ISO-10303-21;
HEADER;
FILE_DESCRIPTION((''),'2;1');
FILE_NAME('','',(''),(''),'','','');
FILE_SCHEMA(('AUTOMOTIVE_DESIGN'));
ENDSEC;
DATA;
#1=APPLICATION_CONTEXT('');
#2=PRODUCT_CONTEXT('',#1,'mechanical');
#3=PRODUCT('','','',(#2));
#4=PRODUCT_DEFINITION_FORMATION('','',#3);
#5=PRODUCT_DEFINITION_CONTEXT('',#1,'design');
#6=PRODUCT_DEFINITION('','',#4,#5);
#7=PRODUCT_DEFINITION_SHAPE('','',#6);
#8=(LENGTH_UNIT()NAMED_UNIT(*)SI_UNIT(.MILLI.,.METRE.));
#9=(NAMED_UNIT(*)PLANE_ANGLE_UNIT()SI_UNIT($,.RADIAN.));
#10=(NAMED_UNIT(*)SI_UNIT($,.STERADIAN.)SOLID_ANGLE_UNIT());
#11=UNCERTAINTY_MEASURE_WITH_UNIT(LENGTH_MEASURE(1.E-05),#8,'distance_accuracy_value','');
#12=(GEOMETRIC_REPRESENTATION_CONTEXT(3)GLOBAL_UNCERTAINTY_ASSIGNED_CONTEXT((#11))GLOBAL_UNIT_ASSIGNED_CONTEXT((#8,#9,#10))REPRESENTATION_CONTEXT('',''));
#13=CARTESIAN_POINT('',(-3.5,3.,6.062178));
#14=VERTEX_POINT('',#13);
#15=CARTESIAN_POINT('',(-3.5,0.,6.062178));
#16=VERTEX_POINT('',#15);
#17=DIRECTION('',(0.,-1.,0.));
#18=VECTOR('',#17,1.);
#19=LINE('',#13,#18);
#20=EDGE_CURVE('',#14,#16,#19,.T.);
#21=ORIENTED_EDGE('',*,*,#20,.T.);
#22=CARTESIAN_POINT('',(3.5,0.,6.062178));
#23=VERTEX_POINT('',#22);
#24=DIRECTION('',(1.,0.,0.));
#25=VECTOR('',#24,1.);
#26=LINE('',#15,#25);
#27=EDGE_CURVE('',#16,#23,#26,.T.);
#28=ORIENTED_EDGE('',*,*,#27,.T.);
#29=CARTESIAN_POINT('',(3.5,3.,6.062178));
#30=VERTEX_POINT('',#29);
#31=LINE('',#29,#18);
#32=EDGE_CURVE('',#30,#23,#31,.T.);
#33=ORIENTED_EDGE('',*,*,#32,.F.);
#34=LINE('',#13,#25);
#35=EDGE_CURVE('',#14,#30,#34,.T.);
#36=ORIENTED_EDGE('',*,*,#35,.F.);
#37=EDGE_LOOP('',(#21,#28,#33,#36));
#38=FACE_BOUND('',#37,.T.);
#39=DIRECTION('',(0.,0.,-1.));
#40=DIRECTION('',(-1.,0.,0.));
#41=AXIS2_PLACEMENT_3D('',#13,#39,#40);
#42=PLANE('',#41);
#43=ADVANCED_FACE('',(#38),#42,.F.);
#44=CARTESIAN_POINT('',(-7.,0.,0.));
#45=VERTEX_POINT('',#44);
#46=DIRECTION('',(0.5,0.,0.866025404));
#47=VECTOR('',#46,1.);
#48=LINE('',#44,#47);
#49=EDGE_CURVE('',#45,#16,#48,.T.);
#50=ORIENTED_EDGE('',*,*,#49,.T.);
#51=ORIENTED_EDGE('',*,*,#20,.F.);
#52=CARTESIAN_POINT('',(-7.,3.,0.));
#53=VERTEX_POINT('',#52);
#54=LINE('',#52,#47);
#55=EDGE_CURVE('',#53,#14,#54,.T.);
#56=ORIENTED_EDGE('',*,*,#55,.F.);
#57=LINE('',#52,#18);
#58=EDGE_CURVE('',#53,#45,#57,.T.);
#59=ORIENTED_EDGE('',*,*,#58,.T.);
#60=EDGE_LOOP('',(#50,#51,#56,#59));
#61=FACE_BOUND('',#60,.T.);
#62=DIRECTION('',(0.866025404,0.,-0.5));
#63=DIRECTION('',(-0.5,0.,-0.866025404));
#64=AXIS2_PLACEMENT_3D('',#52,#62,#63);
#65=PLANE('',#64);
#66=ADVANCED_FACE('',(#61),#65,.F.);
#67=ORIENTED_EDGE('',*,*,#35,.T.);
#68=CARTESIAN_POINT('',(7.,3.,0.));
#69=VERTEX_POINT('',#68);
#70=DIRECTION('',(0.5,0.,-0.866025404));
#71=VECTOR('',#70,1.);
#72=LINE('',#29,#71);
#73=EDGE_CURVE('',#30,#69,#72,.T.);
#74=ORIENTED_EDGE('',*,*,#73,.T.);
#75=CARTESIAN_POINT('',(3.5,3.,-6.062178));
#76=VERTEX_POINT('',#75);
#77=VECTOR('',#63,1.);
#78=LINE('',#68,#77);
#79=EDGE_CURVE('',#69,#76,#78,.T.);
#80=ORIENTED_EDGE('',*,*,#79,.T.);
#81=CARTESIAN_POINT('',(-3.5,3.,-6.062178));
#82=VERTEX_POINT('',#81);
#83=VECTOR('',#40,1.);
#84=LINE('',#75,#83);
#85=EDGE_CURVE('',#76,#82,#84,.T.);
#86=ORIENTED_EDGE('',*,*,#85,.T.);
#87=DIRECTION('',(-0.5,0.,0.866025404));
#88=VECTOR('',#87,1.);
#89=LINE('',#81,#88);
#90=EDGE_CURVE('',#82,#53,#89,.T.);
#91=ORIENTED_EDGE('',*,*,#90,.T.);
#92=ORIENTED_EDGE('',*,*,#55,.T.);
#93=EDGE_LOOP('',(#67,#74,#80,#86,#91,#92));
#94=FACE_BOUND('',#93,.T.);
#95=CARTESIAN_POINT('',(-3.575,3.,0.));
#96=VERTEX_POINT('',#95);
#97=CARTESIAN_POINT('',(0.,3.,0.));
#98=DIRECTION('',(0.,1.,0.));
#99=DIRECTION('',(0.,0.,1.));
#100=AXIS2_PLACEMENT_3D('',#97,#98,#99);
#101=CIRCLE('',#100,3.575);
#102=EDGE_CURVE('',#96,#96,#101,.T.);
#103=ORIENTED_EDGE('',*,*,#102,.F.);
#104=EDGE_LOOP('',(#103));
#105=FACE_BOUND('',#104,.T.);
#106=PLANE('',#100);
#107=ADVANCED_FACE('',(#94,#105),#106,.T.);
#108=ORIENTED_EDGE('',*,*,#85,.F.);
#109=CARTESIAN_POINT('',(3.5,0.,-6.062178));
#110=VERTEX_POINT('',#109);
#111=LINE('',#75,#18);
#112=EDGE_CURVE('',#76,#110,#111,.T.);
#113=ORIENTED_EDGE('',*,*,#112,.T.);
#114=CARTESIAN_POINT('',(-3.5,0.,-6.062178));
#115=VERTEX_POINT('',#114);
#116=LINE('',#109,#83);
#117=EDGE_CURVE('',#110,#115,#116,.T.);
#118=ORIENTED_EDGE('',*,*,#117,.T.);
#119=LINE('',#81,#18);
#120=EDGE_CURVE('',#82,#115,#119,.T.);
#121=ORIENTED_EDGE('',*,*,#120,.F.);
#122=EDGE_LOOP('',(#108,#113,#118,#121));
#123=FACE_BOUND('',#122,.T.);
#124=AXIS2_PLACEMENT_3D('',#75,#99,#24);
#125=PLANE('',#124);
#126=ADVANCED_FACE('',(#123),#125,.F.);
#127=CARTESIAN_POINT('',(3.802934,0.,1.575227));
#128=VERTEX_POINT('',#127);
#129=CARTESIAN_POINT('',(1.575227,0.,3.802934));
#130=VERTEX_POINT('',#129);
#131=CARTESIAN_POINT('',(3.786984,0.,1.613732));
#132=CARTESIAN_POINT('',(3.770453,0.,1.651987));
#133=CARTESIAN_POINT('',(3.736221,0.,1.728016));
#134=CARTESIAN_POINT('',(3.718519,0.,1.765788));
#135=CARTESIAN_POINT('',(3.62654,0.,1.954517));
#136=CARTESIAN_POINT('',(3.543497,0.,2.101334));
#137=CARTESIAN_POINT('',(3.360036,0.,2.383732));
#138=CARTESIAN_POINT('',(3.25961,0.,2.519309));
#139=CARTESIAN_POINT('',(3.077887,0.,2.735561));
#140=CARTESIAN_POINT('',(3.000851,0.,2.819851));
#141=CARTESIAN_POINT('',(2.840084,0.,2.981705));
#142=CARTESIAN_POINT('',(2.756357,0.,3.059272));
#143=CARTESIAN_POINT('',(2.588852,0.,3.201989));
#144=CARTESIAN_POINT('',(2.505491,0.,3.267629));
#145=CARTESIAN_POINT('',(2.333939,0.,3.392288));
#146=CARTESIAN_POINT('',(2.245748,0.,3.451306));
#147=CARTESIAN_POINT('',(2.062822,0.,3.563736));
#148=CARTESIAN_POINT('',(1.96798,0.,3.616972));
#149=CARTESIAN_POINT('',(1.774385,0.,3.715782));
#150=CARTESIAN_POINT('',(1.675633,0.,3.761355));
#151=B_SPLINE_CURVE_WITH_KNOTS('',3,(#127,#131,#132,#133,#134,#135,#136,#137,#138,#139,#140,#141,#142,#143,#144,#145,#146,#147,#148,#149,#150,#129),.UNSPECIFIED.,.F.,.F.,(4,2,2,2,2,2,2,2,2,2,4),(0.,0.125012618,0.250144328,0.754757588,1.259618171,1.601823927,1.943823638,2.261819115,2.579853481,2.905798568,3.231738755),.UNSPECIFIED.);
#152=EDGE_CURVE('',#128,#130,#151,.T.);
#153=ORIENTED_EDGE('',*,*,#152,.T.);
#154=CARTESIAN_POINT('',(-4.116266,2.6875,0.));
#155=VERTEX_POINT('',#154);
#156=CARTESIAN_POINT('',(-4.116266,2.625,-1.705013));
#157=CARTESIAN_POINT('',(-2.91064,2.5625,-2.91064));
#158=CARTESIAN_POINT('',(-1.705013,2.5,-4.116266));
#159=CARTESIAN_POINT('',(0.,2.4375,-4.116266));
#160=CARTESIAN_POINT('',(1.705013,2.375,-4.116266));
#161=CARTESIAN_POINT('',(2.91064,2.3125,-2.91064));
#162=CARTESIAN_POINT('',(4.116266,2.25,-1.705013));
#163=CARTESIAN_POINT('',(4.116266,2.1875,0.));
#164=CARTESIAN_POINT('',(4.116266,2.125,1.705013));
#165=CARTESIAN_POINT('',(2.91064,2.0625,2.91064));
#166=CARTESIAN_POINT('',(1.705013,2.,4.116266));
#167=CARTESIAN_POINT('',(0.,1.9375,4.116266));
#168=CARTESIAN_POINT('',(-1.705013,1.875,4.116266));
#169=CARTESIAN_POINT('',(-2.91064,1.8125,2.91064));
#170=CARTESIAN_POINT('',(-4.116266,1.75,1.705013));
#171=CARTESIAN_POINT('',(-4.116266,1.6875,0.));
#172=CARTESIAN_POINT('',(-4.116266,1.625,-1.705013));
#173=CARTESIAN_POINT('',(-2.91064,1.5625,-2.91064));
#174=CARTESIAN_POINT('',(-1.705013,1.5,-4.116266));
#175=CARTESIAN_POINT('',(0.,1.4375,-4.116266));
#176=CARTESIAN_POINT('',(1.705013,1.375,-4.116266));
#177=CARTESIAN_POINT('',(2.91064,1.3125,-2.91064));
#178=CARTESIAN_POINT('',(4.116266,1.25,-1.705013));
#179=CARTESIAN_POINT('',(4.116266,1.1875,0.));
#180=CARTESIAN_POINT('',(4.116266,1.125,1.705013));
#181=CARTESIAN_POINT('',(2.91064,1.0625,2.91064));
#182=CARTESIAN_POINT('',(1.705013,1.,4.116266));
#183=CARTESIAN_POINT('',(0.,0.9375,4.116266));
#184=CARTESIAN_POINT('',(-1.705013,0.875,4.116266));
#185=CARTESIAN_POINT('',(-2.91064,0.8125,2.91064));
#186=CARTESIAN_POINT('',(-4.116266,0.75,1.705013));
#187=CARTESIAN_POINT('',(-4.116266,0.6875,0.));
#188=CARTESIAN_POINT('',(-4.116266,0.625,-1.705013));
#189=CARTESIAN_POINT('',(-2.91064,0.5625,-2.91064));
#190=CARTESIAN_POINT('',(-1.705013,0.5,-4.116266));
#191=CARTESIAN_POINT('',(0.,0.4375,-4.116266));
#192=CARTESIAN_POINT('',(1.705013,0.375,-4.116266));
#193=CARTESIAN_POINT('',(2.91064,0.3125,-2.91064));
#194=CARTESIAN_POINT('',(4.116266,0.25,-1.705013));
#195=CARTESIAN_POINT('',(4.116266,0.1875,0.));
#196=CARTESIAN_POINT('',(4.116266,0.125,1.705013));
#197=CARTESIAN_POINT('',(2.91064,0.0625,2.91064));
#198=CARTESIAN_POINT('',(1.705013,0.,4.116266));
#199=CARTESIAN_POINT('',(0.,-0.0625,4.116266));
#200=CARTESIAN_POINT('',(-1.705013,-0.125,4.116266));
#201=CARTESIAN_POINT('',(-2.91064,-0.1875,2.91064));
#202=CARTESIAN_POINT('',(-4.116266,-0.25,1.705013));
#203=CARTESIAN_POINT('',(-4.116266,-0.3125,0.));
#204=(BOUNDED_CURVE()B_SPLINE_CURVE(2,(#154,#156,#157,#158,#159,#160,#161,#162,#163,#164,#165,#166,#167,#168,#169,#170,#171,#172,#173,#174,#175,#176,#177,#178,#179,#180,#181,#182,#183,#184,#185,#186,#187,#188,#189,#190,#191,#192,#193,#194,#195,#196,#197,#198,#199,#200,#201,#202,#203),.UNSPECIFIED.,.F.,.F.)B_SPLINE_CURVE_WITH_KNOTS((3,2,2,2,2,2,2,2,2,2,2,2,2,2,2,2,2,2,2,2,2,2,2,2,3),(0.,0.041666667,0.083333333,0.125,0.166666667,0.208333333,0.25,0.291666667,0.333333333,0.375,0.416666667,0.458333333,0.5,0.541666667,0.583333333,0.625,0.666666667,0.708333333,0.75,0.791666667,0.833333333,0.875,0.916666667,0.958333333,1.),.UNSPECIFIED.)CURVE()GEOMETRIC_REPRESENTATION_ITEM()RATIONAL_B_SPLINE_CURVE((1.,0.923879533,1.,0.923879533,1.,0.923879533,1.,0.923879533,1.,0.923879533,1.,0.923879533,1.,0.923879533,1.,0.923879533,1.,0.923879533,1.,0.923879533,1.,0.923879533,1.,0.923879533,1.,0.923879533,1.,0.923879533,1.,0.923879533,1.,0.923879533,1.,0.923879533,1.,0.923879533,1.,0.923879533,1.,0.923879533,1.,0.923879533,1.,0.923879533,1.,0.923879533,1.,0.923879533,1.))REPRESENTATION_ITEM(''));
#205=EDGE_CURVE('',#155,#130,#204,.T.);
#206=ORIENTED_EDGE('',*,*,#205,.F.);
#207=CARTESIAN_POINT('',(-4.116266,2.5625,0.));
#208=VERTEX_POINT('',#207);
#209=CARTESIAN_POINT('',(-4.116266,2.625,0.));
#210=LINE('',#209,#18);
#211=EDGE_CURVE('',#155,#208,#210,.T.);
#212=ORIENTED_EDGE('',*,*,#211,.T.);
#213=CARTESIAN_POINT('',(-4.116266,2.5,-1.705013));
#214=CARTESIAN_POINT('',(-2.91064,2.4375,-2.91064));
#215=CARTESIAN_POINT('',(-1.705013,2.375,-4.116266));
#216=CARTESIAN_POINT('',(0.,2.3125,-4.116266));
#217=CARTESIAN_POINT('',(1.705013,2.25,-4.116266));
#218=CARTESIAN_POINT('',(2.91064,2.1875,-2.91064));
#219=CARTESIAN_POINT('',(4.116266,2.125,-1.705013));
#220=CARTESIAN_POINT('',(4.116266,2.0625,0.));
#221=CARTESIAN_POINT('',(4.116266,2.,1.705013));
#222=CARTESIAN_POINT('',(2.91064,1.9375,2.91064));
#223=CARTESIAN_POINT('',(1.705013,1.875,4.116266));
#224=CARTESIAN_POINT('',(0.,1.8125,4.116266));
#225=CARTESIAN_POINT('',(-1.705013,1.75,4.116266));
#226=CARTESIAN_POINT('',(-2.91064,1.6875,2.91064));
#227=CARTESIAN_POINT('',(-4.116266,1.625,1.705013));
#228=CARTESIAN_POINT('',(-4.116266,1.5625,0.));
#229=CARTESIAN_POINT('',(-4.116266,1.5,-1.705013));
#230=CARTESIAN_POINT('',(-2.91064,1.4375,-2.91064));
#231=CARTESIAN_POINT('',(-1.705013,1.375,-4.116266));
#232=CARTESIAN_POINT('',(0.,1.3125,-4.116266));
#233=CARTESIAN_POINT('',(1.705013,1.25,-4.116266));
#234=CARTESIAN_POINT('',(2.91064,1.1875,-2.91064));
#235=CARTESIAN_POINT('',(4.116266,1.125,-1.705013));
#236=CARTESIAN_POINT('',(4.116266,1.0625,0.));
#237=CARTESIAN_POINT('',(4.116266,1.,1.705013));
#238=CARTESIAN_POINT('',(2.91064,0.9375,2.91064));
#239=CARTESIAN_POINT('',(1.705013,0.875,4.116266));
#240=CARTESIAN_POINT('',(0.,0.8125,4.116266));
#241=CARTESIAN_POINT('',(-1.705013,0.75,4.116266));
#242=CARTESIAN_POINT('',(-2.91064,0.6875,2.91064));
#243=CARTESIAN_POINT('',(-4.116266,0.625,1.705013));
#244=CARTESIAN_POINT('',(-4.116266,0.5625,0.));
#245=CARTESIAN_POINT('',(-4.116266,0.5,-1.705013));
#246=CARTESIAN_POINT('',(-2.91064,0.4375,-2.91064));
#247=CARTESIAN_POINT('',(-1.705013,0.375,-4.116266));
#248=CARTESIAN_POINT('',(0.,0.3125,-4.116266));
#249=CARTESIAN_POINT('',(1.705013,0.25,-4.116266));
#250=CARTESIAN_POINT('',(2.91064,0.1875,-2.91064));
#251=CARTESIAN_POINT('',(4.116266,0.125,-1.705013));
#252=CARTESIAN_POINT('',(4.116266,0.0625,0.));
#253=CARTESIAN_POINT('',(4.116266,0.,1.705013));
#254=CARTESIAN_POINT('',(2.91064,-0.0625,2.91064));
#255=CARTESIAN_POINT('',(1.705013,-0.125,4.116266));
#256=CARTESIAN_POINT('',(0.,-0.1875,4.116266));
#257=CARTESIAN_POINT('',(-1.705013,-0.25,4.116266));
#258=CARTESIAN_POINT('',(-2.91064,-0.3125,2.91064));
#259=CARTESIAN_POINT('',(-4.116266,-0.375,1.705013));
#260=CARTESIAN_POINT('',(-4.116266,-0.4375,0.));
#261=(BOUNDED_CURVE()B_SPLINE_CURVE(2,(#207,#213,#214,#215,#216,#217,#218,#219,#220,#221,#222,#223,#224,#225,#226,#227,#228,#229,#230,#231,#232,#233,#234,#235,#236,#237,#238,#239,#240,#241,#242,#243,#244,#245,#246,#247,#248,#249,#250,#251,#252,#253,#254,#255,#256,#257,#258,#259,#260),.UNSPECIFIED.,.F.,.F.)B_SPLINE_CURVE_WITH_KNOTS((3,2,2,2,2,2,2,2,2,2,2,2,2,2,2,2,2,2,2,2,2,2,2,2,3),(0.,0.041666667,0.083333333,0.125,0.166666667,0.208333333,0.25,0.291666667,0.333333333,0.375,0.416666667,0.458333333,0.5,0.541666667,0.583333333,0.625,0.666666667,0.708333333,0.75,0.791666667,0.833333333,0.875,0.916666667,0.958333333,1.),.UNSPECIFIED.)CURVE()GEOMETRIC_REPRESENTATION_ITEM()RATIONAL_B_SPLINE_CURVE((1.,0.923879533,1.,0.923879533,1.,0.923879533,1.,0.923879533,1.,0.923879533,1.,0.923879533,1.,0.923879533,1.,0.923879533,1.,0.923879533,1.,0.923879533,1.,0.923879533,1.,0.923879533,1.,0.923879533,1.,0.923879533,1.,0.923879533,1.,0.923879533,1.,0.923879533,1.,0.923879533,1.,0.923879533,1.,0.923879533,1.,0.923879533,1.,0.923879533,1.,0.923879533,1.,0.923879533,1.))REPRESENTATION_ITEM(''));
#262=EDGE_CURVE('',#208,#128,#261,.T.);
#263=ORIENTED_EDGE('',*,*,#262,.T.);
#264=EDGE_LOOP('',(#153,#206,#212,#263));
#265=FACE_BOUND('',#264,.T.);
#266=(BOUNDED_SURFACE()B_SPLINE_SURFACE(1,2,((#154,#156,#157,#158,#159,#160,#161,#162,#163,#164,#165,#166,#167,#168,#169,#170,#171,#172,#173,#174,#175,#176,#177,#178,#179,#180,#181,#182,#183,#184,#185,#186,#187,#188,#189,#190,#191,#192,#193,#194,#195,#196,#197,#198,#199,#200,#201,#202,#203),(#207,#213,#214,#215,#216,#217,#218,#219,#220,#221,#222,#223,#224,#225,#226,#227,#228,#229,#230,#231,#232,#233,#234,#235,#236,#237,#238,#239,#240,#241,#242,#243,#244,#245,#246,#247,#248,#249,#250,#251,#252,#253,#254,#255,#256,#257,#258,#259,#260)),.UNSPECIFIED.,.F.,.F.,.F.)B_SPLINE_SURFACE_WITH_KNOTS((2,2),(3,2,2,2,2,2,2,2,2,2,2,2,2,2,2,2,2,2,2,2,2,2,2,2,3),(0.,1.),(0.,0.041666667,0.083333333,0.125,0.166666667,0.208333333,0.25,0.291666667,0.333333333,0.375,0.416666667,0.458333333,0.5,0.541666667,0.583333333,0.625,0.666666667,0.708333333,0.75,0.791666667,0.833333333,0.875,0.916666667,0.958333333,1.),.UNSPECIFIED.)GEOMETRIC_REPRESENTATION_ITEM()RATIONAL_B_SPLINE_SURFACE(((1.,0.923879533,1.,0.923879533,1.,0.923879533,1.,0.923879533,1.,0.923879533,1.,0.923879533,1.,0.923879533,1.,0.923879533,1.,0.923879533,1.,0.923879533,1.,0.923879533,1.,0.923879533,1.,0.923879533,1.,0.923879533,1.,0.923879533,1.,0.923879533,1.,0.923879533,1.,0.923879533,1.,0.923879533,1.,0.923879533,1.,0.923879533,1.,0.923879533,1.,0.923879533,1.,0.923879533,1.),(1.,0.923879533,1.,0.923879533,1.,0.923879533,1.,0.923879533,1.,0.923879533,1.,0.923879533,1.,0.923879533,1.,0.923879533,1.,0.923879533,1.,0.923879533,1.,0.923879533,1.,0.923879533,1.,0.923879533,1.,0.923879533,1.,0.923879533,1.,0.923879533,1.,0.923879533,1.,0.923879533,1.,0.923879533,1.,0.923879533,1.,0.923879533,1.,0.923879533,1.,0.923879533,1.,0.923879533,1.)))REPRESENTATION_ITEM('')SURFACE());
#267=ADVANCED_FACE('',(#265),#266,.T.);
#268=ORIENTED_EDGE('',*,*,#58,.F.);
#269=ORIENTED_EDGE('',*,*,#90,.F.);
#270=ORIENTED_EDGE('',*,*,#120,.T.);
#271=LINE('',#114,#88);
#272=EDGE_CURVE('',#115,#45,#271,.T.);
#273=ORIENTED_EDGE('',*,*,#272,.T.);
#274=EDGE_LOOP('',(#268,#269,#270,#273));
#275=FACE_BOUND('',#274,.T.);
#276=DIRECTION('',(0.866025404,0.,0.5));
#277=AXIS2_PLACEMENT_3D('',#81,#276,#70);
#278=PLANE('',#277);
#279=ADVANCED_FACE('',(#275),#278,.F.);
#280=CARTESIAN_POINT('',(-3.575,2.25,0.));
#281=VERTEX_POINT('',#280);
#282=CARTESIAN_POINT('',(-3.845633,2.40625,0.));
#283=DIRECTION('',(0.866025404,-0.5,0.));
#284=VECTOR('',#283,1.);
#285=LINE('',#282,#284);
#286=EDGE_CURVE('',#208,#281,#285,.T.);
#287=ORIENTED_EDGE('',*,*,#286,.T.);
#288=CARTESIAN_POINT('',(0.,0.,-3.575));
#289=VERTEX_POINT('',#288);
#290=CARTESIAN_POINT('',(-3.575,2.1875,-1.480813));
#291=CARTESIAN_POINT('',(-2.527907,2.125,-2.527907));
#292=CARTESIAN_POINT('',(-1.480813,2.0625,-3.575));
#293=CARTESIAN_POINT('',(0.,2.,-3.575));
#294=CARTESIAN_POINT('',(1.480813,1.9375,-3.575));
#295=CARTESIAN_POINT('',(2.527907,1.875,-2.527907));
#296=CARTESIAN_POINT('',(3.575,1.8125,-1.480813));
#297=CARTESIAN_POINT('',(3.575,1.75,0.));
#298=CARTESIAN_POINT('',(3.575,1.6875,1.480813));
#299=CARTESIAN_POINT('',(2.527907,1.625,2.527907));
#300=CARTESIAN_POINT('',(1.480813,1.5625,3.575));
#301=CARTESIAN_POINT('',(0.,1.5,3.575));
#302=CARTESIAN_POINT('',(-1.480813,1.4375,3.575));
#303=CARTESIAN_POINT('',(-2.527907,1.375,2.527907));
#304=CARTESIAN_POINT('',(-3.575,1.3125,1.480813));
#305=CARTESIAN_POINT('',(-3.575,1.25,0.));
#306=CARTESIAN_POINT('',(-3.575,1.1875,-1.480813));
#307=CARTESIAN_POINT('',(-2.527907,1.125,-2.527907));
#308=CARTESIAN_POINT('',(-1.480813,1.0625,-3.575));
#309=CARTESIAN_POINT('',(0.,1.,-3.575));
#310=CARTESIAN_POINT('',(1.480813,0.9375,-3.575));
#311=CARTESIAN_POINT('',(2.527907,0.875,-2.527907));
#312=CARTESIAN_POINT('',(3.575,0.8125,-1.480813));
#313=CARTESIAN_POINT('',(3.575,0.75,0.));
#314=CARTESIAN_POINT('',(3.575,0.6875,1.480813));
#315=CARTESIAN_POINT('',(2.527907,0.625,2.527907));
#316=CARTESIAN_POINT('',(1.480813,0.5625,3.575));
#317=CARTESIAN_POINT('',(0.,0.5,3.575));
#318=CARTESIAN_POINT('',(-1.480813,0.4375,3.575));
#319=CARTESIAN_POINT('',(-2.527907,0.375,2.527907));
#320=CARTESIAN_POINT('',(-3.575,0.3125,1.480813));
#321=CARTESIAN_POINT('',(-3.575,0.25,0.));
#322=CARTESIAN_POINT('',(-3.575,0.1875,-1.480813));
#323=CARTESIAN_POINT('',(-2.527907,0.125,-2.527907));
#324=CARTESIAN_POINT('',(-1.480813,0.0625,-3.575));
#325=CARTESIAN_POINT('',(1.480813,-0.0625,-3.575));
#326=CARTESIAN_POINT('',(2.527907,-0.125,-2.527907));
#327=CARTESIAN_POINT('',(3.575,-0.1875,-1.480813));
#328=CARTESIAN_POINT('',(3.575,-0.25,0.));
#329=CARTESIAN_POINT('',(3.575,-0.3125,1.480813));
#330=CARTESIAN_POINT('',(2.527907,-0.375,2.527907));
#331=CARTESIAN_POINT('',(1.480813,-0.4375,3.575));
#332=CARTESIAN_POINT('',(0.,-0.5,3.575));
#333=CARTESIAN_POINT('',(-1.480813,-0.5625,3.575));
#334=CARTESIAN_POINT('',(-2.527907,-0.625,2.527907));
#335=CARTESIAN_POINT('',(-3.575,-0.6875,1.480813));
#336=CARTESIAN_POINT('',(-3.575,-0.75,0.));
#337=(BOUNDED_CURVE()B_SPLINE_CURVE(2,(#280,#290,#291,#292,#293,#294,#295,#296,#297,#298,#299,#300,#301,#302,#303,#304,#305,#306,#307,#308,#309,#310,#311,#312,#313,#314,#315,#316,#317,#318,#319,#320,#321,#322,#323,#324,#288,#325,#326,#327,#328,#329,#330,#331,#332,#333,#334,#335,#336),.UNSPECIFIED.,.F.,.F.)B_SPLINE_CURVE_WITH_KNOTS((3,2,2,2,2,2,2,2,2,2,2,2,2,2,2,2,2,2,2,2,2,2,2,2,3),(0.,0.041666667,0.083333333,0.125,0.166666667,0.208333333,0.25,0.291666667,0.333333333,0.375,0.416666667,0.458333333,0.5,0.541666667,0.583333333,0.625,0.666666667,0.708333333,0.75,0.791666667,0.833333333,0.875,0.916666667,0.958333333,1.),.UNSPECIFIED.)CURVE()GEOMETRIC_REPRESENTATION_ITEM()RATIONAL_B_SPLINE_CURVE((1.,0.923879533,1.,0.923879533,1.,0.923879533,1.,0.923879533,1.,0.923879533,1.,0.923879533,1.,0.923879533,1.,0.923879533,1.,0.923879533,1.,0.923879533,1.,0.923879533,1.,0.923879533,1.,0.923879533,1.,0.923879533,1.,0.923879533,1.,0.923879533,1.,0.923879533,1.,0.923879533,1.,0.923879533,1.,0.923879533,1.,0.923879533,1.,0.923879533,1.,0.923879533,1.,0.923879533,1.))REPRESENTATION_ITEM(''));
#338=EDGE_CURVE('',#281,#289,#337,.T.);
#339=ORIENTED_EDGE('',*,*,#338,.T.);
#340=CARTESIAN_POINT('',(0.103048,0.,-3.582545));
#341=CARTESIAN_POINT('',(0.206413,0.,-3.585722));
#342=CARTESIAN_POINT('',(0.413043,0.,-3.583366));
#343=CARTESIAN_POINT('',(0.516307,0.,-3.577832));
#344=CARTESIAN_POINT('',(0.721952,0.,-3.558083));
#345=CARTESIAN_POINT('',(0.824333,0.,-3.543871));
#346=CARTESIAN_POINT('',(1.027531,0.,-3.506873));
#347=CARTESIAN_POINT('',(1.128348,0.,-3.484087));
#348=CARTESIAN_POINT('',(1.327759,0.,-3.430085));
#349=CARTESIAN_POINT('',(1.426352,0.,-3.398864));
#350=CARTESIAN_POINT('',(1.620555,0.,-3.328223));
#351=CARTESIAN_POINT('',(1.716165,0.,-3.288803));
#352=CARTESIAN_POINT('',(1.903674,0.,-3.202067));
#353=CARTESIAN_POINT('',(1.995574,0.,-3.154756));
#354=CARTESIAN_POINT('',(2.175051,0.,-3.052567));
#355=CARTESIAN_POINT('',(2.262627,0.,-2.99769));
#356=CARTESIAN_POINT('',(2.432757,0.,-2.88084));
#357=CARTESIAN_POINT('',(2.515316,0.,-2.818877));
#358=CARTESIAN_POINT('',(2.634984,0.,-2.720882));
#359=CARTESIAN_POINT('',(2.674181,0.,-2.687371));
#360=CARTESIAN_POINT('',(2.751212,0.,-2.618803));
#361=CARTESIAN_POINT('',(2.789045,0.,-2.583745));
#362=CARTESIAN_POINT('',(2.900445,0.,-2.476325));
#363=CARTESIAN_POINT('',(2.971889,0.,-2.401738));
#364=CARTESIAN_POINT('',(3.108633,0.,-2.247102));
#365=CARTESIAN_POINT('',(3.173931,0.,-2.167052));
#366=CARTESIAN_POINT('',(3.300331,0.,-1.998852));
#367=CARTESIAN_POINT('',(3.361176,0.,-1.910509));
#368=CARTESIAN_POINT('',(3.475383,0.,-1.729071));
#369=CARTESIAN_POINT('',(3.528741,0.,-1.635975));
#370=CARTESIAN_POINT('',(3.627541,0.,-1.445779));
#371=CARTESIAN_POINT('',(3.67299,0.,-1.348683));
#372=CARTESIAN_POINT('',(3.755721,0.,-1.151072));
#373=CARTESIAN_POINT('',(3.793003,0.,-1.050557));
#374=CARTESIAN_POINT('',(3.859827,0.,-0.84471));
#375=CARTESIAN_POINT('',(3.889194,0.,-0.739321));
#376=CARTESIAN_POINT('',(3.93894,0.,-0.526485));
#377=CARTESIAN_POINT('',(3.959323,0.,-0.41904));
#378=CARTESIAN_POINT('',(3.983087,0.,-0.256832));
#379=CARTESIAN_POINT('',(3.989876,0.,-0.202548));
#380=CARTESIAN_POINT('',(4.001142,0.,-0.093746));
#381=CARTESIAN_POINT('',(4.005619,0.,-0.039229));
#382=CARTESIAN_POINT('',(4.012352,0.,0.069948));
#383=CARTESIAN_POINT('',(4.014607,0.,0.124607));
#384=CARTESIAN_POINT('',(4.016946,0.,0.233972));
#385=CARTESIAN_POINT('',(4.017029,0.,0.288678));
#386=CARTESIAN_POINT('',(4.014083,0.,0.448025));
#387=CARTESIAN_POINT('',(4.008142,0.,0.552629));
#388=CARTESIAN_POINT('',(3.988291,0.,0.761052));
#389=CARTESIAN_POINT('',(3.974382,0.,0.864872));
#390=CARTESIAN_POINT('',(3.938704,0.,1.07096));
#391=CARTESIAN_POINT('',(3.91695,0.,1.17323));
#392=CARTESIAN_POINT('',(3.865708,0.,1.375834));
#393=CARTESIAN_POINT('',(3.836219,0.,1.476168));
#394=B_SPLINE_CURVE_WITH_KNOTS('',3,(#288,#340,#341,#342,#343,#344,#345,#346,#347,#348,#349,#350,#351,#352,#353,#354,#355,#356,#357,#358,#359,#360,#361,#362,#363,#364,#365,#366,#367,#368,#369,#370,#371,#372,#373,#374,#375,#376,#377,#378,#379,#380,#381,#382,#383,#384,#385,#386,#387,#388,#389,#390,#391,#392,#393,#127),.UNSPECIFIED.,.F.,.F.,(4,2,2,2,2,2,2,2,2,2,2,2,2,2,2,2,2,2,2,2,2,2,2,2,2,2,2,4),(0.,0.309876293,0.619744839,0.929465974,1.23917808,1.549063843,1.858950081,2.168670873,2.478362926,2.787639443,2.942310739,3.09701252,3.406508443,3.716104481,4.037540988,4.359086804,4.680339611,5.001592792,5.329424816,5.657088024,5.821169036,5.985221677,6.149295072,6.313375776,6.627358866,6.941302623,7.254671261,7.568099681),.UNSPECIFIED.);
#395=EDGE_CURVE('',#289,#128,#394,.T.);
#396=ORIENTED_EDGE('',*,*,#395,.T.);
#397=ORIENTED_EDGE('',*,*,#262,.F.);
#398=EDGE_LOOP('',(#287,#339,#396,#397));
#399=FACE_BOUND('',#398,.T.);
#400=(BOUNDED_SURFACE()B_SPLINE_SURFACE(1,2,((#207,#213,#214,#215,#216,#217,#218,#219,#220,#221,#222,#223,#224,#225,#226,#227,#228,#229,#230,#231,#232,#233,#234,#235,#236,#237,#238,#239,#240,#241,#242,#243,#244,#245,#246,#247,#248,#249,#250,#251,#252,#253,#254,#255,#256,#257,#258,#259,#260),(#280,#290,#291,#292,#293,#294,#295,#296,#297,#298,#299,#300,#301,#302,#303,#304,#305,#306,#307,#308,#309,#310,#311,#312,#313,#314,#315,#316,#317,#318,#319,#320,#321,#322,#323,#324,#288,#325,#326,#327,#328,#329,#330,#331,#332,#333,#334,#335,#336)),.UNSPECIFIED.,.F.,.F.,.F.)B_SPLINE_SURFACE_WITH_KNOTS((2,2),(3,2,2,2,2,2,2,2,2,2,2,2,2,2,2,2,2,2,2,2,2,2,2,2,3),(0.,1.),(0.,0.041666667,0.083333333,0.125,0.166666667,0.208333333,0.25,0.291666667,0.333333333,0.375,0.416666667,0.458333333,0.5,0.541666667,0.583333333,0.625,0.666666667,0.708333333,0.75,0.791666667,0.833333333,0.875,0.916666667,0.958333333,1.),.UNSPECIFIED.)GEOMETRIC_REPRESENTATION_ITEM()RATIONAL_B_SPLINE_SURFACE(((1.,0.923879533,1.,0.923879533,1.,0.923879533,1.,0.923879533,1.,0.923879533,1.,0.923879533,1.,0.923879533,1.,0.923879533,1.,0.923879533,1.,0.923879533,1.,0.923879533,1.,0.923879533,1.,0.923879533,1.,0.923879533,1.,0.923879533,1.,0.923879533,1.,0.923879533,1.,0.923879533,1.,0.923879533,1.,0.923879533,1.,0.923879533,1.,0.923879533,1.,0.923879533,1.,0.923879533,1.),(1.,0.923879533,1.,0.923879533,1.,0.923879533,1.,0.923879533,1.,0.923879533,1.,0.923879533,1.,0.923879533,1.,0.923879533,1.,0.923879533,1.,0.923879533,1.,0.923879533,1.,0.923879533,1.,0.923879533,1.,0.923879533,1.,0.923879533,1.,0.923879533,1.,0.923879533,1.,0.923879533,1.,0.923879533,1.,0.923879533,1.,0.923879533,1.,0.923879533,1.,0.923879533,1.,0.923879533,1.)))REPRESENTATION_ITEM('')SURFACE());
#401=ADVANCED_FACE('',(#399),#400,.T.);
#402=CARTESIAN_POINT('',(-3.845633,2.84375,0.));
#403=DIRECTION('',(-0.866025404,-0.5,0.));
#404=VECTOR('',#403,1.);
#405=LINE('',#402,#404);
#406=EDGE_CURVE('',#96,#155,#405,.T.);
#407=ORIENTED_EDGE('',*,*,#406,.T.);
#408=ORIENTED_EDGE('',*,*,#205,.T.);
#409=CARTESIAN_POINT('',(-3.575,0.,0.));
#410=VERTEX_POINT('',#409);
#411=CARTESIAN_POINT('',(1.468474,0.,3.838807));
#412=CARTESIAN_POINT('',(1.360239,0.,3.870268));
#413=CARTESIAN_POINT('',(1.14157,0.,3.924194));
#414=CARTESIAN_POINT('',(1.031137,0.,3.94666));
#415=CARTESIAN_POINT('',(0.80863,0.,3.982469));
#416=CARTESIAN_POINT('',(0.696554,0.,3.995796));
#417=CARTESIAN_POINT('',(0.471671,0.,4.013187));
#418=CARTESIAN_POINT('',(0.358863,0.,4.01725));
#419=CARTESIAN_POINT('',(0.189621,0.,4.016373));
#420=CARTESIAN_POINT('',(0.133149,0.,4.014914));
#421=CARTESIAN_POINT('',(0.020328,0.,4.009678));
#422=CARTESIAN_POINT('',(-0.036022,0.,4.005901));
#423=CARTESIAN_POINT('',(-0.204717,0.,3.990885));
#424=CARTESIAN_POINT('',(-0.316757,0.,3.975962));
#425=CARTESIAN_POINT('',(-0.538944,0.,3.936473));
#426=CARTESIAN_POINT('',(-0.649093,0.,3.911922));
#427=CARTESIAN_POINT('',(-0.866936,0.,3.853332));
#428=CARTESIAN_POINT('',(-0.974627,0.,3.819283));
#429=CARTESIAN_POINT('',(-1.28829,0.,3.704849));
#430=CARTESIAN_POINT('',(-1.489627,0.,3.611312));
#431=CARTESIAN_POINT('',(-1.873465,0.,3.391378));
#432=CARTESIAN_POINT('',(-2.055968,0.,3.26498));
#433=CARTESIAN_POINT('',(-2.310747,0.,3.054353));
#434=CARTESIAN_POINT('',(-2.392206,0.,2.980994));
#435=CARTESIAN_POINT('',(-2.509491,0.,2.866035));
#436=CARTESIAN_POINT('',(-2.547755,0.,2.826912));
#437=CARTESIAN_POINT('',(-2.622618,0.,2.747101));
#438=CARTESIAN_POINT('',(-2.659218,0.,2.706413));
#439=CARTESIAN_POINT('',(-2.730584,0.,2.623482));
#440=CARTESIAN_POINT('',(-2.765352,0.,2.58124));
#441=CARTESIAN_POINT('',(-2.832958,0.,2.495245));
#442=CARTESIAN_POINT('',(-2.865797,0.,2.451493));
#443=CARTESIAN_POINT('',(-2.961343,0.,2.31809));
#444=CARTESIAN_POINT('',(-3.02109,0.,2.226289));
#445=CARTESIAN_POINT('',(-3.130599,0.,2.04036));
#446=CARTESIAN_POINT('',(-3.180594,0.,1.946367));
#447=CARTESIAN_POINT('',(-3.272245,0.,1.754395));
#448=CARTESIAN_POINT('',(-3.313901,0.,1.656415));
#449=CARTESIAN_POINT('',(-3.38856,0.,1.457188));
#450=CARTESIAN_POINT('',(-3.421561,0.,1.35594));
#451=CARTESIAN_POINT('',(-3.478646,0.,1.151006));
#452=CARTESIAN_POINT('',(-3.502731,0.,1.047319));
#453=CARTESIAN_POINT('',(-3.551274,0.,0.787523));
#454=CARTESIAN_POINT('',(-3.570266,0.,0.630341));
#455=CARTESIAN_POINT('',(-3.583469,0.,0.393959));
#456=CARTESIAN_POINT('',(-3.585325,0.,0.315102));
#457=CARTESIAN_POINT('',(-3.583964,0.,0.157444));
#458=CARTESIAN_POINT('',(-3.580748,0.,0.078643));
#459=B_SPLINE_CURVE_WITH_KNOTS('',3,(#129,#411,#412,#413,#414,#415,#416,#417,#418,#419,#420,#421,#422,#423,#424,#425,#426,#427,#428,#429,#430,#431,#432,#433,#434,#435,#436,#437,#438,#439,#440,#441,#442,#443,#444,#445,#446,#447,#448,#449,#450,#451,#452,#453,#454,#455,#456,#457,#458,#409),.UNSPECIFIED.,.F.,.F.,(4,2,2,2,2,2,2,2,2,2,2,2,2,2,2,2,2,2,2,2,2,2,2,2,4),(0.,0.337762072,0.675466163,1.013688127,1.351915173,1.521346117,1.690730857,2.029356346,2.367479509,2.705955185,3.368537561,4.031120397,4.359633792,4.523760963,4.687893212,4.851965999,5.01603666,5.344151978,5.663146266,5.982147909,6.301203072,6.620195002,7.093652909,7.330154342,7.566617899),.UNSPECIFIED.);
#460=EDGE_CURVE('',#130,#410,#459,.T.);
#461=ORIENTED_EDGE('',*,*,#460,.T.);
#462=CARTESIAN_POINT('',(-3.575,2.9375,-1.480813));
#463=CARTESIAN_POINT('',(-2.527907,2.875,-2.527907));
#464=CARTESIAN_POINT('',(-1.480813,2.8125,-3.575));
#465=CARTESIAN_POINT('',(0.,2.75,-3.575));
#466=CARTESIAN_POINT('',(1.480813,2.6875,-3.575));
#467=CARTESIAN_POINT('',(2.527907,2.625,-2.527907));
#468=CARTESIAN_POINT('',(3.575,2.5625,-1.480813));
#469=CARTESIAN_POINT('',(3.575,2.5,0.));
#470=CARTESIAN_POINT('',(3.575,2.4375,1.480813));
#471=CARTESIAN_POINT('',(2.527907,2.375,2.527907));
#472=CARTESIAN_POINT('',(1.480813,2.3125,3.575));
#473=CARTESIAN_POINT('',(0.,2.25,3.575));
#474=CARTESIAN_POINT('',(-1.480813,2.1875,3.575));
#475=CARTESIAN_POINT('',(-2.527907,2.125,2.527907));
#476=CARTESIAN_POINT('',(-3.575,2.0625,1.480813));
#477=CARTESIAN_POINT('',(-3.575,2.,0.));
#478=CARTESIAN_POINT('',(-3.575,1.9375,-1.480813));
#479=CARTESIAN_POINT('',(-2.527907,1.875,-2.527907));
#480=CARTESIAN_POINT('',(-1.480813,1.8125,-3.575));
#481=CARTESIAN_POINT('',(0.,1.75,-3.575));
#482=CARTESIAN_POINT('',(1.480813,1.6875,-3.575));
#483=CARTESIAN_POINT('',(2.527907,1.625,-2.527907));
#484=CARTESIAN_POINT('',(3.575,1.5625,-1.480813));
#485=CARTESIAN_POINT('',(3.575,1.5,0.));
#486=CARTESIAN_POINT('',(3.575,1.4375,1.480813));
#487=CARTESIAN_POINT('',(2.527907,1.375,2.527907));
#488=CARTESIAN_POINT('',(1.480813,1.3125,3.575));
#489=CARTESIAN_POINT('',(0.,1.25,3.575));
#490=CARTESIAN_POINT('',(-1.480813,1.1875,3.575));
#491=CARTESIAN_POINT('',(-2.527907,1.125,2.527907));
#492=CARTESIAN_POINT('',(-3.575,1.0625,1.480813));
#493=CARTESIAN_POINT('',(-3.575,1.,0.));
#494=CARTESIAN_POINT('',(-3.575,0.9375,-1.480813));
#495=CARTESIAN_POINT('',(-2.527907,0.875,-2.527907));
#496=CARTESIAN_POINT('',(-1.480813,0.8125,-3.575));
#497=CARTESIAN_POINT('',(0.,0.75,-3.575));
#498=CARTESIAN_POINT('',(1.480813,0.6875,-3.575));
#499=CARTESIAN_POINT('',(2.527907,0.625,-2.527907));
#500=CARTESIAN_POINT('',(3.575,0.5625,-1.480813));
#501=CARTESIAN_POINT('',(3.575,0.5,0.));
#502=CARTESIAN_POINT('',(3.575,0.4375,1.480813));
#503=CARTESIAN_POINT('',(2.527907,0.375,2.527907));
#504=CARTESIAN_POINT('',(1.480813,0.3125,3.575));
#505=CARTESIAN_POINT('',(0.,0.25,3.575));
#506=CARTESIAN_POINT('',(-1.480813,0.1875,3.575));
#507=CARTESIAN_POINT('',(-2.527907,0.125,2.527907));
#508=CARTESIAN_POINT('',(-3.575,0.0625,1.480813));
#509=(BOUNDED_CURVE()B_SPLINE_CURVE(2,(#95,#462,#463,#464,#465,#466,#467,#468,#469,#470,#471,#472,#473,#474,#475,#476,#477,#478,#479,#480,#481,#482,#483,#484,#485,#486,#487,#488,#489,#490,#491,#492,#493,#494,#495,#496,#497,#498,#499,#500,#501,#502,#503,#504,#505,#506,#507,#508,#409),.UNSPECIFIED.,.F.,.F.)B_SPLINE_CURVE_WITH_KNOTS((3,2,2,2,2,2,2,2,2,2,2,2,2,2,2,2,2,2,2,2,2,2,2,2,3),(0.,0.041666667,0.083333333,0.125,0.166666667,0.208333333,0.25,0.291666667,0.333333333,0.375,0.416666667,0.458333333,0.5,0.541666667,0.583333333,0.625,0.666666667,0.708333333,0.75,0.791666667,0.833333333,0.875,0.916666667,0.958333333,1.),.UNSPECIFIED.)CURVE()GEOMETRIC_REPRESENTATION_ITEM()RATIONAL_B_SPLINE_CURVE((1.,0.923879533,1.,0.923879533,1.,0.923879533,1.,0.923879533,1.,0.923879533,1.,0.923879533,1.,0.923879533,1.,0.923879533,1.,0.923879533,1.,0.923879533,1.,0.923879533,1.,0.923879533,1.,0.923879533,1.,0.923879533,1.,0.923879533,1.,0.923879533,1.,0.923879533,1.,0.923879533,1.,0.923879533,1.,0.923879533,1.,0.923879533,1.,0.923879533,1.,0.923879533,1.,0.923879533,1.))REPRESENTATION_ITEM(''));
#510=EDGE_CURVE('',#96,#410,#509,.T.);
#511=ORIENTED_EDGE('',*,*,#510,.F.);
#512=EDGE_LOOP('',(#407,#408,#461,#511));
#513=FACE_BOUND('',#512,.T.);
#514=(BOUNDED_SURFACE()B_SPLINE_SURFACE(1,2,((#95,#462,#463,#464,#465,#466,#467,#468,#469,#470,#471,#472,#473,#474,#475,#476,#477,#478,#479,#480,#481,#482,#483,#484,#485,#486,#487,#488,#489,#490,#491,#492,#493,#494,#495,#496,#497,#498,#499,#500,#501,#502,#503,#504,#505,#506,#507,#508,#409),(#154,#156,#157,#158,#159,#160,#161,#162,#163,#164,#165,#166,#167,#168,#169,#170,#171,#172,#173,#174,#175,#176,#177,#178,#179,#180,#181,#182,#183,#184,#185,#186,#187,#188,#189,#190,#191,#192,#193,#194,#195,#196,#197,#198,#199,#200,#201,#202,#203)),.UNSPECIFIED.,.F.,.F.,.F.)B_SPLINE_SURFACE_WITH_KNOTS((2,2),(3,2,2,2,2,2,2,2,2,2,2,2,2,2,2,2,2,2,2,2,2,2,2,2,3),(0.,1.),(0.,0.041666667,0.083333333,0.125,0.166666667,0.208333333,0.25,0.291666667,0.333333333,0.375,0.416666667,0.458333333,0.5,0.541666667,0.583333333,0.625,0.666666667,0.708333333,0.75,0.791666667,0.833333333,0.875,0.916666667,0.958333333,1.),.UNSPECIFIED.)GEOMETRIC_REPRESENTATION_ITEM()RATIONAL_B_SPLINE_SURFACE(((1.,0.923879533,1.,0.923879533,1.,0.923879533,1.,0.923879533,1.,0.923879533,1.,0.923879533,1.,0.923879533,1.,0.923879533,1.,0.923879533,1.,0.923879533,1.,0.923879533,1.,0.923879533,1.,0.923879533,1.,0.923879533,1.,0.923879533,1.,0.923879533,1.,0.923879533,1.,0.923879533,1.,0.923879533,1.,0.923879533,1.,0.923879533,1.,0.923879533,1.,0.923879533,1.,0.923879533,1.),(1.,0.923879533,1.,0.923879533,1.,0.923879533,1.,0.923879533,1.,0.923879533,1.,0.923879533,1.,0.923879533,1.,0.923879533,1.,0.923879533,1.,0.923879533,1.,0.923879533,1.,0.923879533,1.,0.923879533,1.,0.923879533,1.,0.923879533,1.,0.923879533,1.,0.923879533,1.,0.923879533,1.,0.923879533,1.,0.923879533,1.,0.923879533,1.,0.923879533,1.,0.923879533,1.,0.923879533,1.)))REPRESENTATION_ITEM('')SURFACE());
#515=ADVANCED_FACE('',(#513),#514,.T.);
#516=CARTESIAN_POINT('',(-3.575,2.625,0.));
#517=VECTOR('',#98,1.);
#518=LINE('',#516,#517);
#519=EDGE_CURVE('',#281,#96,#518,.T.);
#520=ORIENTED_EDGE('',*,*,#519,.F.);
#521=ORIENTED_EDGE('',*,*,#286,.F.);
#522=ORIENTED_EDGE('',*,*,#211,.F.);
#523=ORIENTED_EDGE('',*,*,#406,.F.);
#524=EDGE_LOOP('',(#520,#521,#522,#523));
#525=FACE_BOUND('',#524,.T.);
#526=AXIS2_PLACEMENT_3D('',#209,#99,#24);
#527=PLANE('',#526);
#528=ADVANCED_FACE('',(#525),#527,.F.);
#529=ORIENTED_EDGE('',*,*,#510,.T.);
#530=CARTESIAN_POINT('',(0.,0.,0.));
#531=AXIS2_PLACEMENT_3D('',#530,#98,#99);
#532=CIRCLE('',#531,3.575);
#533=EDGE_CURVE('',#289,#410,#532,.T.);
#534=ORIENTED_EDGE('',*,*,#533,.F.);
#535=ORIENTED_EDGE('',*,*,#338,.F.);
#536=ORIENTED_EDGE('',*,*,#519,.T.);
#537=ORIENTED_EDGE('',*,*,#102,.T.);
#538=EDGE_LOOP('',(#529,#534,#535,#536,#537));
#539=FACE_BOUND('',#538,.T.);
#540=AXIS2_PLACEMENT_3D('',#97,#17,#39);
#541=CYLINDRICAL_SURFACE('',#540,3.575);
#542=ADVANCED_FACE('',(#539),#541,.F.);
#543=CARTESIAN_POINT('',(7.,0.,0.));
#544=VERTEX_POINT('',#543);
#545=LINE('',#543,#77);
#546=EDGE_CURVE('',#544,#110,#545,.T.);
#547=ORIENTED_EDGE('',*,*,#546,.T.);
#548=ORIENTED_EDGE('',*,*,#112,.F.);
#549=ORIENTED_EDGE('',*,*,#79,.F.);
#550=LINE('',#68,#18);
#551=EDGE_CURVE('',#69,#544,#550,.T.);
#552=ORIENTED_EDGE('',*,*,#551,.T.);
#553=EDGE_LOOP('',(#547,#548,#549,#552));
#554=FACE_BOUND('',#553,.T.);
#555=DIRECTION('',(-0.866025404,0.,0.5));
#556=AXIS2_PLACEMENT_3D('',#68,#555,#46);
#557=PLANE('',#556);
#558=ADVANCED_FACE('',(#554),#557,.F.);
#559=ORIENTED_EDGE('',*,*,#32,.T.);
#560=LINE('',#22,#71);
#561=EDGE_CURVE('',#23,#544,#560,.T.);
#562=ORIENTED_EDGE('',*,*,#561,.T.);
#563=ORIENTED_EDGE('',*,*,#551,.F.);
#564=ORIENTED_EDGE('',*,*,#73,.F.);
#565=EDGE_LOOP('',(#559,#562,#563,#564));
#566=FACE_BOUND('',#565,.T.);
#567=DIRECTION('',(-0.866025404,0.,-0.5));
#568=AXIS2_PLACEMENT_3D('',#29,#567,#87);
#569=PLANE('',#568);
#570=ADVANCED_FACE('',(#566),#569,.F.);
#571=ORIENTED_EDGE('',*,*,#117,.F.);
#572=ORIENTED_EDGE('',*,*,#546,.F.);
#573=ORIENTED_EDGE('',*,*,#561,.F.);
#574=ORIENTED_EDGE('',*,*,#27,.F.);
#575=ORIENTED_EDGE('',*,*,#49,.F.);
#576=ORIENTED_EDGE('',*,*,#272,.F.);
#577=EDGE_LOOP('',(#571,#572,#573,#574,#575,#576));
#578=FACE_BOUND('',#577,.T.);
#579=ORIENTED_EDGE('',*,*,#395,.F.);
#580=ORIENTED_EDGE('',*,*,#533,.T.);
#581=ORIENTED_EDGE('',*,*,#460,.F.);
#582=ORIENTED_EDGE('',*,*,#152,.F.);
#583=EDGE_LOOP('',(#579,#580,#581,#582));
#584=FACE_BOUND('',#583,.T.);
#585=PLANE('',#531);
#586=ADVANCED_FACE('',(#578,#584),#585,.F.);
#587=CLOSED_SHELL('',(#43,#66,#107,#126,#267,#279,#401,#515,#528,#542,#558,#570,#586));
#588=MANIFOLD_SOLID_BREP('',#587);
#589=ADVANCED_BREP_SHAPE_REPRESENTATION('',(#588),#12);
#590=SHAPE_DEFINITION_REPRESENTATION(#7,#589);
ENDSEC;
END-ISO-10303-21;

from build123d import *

# Parameters (mm, degrees)
SKETCH1_R           = 3.575
BOSS_EXTRUDE1_DEPTH = 3
THREAD1_PITCH       = 1


with BuildPart() as part:
    # Sketch1 → Boss-Extrude1 (new body)
    with BuildSketch(Plane(origin=(0, 0, 0), x_dir=(1, 0, 0), z_dir=(0, 1, 0))):
        Polygon((7, 0), (3.5, 6.062177826), (-3.5, 6.062177826), (-7, 0), (-3.5, -6.062177826), (3.5, -6.062177826), align=None)
        with Locations(Location((0, 0, 0), (0, 0, 270))):
            Circle(SKETCH1_R, mode=Mode.SUBTRACT)
    extrude(amount=BOSS_EXTRUDE1_DEPTH)

    # Thread1: the profile of Thread Profile1 profile screwed along a right-hand helix of 3 turns, 8 arcs to a turn; built about Z, then put on its axis
    thread1_z = Axis((0, 0, 0), (0, 0, 1))
    thread1_corners = [(3.5747, 0, -0.000173205), (4.116265875, 0, 0.312499999), (4.116265875, 0, 0.437499999), (3.5747, 0, 0.750173202)]
    with BuildLine(mode=Mode.PRIVATE) as thread1_profile:
        Line(thread1_corners[0], thread1_corners[1])
        Line(thread1_corners[1], thread1_corners[2])
        Line(thread1_corners[2], thread1_corners[3])
        Line(thread1_corners[3], thread1_corners[0])
    thread1_cap = Face(thread1_profile.wire())
    thread1_turn_angles = [0, 22.5, 45, 67.5, 90, 112.5, 135, 157.5, 180, 202.5, 225, 247.5, 270, 292.5, 315, 337.5, 360]
    thread1_turn_weights = [1, 0.9238795325112867, 1, 0.9238795325112867, 1, 0.9238795325112867, 1, 0.9238795325112867, 1, 0.9238795325112867, 1, 0.9238795325112867, 1, 0.9238795325112867, 1, 0.9238795325112867, 1]
    thread1_turn_rails = [Edge.make_bspline([Vector(p[0], p[1], 0).rotate(thread1_z, thread1_turn_angles[k]) / thread1_turn_weights[k] + Vector(0, 0, p[2] + THREAD1_PITCH * thread1_turn_angles[k] / 360) for k in range(17)], [0, 0, 0, 1, 1, 2, 2, 3, 3, 4, 4, 5, 5, 6, 6, 7, 7, 8, 8, 8], 2, thread1_turn_weights) for p in thread1_corners]
    thread1_turn_sides = [Face.make_surface_from_curves(thread1_turn_rails[p[0]], thread1_turn_rails[p[1]]) for p in [(0, 1), (1, 2), (2, 3), (3, 0)]]
    thread1 = Plane(origin=(0, 3, 0), x_dir=(-1, 0, 0), z_dir=(0, -1, 0)) * Solid(Shell([*[p.moved(Location((0, 0, THREAD1_PITCH * i))) for i in range(3) for p in thread1_turn_sides], thread1_cap, thread1_cap.rotate(thread1_z, 1080).moved(Location((0, 0, THREAD1_PITCH * 1080 / 360)))]))
    add(thread1, mode=Mode.SUBTRACT)


solid = part.part
